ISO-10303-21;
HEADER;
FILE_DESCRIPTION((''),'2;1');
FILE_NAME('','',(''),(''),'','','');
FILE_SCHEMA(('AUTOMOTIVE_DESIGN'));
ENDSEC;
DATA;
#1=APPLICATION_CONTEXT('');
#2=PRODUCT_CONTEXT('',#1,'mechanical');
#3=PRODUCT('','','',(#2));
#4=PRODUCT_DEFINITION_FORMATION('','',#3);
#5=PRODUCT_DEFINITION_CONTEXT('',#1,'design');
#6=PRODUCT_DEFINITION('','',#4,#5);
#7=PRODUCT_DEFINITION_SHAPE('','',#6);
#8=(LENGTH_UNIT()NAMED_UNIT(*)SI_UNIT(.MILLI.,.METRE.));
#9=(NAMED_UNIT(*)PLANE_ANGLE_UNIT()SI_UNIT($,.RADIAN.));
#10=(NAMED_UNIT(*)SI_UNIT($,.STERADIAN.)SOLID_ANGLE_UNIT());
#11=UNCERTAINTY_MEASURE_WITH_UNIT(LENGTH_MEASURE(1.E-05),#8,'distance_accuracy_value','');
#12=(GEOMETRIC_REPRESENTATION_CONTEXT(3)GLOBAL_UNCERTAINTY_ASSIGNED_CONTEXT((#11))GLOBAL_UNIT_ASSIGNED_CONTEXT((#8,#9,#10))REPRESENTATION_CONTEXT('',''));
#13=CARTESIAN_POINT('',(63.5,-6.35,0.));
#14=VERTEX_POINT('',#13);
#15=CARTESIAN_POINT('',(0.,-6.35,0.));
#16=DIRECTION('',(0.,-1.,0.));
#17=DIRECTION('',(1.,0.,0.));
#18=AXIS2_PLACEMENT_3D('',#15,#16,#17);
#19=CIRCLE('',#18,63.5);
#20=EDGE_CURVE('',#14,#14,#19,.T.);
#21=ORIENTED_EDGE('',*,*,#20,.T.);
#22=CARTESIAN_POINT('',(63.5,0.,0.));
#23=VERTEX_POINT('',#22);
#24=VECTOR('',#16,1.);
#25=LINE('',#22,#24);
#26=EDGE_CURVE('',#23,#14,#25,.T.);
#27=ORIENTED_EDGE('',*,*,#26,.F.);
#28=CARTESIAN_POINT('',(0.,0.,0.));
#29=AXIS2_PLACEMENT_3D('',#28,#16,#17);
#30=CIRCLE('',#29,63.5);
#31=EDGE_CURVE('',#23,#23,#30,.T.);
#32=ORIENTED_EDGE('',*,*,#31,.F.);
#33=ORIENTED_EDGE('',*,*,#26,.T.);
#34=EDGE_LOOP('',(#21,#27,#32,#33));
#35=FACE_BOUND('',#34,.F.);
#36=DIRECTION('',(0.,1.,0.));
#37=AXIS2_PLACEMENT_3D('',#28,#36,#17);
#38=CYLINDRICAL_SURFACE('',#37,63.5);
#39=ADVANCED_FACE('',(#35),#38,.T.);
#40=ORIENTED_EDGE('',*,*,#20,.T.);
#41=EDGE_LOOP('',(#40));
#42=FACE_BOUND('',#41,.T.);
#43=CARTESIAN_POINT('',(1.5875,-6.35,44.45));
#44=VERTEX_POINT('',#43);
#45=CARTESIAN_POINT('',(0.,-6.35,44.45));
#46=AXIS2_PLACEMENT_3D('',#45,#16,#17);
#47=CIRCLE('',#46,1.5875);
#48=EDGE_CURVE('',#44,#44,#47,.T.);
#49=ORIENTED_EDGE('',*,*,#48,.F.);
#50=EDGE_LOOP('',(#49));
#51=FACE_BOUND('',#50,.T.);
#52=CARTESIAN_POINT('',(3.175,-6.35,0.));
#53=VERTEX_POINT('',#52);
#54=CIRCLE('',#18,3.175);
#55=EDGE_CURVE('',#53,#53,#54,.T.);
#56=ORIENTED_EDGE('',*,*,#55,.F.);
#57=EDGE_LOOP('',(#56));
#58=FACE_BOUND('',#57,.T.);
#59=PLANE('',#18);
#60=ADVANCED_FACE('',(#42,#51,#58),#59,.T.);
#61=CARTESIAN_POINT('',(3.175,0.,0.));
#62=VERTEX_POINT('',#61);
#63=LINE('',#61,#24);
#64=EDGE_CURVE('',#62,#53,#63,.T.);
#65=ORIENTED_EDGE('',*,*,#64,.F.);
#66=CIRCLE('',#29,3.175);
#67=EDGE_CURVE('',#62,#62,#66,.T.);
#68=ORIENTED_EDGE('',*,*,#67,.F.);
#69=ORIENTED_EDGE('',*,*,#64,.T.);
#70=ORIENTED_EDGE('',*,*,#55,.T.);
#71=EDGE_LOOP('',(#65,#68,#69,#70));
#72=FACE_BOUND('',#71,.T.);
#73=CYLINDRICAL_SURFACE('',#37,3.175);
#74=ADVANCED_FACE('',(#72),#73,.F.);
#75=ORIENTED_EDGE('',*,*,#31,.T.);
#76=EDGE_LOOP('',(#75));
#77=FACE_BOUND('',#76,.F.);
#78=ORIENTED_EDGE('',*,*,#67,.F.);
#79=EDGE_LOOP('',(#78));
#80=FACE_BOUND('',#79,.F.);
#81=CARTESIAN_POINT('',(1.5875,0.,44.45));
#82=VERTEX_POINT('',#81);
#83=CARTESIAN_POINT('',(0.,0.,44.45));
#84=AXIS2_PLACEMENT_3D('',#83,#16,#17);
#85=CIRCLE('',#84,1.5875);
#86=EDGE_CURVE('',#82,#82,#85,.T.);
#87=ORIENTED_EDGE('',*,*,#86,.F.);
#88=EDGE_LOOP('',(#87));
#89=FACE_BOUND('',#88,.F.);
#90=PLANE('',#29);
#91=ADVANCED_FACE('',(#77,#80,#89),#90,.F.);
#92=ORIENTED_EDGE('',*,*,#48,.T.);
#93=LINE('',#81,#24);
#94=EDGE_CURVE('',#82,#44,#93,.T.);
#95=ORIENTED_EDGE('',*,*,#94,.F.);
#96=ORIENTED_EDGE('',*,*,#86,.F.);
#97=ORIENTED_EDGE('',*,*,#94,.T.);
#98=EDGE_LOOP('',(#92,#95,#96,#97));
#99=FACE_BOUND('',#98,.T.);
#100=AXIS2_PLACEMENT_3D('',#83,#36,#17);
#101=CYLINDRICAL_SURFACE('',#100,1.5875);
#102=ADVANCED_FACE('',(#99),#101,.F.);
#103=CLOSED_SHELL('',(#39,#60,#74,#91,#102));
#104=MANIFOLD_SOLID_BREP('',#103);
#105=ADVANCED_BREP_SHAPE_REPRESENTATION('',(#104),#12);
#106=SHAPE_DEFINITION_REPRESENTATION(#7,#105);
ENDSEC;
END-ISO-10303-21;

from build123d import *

# Parameters (mm, degrees)
F0_R     = 63.5
F0_R_2   = 3.175
F0_R_3   = 1.5875
F1_DEPTH = 6.35


# Not quite as in the source:
# - a length typed as a fraction of an inch, garbled in the dataset ("3 / 203.2 mm" for 3/8 in), is restored


with BuildPart() as f1:
    # F0 (on Front) → F1 (new body)
    with BuildSketch(Plane.XZ):
        Circle(F0_R)
        Circle(F0_R_2, mode=Mode.SUBTRACT)
        with Locations((0, 44.45)):
            Circle(F0_R_3, mode=Mode.SUBTRACT)
    extrude(amount=F1_DEPTH)


solid = f1.part
